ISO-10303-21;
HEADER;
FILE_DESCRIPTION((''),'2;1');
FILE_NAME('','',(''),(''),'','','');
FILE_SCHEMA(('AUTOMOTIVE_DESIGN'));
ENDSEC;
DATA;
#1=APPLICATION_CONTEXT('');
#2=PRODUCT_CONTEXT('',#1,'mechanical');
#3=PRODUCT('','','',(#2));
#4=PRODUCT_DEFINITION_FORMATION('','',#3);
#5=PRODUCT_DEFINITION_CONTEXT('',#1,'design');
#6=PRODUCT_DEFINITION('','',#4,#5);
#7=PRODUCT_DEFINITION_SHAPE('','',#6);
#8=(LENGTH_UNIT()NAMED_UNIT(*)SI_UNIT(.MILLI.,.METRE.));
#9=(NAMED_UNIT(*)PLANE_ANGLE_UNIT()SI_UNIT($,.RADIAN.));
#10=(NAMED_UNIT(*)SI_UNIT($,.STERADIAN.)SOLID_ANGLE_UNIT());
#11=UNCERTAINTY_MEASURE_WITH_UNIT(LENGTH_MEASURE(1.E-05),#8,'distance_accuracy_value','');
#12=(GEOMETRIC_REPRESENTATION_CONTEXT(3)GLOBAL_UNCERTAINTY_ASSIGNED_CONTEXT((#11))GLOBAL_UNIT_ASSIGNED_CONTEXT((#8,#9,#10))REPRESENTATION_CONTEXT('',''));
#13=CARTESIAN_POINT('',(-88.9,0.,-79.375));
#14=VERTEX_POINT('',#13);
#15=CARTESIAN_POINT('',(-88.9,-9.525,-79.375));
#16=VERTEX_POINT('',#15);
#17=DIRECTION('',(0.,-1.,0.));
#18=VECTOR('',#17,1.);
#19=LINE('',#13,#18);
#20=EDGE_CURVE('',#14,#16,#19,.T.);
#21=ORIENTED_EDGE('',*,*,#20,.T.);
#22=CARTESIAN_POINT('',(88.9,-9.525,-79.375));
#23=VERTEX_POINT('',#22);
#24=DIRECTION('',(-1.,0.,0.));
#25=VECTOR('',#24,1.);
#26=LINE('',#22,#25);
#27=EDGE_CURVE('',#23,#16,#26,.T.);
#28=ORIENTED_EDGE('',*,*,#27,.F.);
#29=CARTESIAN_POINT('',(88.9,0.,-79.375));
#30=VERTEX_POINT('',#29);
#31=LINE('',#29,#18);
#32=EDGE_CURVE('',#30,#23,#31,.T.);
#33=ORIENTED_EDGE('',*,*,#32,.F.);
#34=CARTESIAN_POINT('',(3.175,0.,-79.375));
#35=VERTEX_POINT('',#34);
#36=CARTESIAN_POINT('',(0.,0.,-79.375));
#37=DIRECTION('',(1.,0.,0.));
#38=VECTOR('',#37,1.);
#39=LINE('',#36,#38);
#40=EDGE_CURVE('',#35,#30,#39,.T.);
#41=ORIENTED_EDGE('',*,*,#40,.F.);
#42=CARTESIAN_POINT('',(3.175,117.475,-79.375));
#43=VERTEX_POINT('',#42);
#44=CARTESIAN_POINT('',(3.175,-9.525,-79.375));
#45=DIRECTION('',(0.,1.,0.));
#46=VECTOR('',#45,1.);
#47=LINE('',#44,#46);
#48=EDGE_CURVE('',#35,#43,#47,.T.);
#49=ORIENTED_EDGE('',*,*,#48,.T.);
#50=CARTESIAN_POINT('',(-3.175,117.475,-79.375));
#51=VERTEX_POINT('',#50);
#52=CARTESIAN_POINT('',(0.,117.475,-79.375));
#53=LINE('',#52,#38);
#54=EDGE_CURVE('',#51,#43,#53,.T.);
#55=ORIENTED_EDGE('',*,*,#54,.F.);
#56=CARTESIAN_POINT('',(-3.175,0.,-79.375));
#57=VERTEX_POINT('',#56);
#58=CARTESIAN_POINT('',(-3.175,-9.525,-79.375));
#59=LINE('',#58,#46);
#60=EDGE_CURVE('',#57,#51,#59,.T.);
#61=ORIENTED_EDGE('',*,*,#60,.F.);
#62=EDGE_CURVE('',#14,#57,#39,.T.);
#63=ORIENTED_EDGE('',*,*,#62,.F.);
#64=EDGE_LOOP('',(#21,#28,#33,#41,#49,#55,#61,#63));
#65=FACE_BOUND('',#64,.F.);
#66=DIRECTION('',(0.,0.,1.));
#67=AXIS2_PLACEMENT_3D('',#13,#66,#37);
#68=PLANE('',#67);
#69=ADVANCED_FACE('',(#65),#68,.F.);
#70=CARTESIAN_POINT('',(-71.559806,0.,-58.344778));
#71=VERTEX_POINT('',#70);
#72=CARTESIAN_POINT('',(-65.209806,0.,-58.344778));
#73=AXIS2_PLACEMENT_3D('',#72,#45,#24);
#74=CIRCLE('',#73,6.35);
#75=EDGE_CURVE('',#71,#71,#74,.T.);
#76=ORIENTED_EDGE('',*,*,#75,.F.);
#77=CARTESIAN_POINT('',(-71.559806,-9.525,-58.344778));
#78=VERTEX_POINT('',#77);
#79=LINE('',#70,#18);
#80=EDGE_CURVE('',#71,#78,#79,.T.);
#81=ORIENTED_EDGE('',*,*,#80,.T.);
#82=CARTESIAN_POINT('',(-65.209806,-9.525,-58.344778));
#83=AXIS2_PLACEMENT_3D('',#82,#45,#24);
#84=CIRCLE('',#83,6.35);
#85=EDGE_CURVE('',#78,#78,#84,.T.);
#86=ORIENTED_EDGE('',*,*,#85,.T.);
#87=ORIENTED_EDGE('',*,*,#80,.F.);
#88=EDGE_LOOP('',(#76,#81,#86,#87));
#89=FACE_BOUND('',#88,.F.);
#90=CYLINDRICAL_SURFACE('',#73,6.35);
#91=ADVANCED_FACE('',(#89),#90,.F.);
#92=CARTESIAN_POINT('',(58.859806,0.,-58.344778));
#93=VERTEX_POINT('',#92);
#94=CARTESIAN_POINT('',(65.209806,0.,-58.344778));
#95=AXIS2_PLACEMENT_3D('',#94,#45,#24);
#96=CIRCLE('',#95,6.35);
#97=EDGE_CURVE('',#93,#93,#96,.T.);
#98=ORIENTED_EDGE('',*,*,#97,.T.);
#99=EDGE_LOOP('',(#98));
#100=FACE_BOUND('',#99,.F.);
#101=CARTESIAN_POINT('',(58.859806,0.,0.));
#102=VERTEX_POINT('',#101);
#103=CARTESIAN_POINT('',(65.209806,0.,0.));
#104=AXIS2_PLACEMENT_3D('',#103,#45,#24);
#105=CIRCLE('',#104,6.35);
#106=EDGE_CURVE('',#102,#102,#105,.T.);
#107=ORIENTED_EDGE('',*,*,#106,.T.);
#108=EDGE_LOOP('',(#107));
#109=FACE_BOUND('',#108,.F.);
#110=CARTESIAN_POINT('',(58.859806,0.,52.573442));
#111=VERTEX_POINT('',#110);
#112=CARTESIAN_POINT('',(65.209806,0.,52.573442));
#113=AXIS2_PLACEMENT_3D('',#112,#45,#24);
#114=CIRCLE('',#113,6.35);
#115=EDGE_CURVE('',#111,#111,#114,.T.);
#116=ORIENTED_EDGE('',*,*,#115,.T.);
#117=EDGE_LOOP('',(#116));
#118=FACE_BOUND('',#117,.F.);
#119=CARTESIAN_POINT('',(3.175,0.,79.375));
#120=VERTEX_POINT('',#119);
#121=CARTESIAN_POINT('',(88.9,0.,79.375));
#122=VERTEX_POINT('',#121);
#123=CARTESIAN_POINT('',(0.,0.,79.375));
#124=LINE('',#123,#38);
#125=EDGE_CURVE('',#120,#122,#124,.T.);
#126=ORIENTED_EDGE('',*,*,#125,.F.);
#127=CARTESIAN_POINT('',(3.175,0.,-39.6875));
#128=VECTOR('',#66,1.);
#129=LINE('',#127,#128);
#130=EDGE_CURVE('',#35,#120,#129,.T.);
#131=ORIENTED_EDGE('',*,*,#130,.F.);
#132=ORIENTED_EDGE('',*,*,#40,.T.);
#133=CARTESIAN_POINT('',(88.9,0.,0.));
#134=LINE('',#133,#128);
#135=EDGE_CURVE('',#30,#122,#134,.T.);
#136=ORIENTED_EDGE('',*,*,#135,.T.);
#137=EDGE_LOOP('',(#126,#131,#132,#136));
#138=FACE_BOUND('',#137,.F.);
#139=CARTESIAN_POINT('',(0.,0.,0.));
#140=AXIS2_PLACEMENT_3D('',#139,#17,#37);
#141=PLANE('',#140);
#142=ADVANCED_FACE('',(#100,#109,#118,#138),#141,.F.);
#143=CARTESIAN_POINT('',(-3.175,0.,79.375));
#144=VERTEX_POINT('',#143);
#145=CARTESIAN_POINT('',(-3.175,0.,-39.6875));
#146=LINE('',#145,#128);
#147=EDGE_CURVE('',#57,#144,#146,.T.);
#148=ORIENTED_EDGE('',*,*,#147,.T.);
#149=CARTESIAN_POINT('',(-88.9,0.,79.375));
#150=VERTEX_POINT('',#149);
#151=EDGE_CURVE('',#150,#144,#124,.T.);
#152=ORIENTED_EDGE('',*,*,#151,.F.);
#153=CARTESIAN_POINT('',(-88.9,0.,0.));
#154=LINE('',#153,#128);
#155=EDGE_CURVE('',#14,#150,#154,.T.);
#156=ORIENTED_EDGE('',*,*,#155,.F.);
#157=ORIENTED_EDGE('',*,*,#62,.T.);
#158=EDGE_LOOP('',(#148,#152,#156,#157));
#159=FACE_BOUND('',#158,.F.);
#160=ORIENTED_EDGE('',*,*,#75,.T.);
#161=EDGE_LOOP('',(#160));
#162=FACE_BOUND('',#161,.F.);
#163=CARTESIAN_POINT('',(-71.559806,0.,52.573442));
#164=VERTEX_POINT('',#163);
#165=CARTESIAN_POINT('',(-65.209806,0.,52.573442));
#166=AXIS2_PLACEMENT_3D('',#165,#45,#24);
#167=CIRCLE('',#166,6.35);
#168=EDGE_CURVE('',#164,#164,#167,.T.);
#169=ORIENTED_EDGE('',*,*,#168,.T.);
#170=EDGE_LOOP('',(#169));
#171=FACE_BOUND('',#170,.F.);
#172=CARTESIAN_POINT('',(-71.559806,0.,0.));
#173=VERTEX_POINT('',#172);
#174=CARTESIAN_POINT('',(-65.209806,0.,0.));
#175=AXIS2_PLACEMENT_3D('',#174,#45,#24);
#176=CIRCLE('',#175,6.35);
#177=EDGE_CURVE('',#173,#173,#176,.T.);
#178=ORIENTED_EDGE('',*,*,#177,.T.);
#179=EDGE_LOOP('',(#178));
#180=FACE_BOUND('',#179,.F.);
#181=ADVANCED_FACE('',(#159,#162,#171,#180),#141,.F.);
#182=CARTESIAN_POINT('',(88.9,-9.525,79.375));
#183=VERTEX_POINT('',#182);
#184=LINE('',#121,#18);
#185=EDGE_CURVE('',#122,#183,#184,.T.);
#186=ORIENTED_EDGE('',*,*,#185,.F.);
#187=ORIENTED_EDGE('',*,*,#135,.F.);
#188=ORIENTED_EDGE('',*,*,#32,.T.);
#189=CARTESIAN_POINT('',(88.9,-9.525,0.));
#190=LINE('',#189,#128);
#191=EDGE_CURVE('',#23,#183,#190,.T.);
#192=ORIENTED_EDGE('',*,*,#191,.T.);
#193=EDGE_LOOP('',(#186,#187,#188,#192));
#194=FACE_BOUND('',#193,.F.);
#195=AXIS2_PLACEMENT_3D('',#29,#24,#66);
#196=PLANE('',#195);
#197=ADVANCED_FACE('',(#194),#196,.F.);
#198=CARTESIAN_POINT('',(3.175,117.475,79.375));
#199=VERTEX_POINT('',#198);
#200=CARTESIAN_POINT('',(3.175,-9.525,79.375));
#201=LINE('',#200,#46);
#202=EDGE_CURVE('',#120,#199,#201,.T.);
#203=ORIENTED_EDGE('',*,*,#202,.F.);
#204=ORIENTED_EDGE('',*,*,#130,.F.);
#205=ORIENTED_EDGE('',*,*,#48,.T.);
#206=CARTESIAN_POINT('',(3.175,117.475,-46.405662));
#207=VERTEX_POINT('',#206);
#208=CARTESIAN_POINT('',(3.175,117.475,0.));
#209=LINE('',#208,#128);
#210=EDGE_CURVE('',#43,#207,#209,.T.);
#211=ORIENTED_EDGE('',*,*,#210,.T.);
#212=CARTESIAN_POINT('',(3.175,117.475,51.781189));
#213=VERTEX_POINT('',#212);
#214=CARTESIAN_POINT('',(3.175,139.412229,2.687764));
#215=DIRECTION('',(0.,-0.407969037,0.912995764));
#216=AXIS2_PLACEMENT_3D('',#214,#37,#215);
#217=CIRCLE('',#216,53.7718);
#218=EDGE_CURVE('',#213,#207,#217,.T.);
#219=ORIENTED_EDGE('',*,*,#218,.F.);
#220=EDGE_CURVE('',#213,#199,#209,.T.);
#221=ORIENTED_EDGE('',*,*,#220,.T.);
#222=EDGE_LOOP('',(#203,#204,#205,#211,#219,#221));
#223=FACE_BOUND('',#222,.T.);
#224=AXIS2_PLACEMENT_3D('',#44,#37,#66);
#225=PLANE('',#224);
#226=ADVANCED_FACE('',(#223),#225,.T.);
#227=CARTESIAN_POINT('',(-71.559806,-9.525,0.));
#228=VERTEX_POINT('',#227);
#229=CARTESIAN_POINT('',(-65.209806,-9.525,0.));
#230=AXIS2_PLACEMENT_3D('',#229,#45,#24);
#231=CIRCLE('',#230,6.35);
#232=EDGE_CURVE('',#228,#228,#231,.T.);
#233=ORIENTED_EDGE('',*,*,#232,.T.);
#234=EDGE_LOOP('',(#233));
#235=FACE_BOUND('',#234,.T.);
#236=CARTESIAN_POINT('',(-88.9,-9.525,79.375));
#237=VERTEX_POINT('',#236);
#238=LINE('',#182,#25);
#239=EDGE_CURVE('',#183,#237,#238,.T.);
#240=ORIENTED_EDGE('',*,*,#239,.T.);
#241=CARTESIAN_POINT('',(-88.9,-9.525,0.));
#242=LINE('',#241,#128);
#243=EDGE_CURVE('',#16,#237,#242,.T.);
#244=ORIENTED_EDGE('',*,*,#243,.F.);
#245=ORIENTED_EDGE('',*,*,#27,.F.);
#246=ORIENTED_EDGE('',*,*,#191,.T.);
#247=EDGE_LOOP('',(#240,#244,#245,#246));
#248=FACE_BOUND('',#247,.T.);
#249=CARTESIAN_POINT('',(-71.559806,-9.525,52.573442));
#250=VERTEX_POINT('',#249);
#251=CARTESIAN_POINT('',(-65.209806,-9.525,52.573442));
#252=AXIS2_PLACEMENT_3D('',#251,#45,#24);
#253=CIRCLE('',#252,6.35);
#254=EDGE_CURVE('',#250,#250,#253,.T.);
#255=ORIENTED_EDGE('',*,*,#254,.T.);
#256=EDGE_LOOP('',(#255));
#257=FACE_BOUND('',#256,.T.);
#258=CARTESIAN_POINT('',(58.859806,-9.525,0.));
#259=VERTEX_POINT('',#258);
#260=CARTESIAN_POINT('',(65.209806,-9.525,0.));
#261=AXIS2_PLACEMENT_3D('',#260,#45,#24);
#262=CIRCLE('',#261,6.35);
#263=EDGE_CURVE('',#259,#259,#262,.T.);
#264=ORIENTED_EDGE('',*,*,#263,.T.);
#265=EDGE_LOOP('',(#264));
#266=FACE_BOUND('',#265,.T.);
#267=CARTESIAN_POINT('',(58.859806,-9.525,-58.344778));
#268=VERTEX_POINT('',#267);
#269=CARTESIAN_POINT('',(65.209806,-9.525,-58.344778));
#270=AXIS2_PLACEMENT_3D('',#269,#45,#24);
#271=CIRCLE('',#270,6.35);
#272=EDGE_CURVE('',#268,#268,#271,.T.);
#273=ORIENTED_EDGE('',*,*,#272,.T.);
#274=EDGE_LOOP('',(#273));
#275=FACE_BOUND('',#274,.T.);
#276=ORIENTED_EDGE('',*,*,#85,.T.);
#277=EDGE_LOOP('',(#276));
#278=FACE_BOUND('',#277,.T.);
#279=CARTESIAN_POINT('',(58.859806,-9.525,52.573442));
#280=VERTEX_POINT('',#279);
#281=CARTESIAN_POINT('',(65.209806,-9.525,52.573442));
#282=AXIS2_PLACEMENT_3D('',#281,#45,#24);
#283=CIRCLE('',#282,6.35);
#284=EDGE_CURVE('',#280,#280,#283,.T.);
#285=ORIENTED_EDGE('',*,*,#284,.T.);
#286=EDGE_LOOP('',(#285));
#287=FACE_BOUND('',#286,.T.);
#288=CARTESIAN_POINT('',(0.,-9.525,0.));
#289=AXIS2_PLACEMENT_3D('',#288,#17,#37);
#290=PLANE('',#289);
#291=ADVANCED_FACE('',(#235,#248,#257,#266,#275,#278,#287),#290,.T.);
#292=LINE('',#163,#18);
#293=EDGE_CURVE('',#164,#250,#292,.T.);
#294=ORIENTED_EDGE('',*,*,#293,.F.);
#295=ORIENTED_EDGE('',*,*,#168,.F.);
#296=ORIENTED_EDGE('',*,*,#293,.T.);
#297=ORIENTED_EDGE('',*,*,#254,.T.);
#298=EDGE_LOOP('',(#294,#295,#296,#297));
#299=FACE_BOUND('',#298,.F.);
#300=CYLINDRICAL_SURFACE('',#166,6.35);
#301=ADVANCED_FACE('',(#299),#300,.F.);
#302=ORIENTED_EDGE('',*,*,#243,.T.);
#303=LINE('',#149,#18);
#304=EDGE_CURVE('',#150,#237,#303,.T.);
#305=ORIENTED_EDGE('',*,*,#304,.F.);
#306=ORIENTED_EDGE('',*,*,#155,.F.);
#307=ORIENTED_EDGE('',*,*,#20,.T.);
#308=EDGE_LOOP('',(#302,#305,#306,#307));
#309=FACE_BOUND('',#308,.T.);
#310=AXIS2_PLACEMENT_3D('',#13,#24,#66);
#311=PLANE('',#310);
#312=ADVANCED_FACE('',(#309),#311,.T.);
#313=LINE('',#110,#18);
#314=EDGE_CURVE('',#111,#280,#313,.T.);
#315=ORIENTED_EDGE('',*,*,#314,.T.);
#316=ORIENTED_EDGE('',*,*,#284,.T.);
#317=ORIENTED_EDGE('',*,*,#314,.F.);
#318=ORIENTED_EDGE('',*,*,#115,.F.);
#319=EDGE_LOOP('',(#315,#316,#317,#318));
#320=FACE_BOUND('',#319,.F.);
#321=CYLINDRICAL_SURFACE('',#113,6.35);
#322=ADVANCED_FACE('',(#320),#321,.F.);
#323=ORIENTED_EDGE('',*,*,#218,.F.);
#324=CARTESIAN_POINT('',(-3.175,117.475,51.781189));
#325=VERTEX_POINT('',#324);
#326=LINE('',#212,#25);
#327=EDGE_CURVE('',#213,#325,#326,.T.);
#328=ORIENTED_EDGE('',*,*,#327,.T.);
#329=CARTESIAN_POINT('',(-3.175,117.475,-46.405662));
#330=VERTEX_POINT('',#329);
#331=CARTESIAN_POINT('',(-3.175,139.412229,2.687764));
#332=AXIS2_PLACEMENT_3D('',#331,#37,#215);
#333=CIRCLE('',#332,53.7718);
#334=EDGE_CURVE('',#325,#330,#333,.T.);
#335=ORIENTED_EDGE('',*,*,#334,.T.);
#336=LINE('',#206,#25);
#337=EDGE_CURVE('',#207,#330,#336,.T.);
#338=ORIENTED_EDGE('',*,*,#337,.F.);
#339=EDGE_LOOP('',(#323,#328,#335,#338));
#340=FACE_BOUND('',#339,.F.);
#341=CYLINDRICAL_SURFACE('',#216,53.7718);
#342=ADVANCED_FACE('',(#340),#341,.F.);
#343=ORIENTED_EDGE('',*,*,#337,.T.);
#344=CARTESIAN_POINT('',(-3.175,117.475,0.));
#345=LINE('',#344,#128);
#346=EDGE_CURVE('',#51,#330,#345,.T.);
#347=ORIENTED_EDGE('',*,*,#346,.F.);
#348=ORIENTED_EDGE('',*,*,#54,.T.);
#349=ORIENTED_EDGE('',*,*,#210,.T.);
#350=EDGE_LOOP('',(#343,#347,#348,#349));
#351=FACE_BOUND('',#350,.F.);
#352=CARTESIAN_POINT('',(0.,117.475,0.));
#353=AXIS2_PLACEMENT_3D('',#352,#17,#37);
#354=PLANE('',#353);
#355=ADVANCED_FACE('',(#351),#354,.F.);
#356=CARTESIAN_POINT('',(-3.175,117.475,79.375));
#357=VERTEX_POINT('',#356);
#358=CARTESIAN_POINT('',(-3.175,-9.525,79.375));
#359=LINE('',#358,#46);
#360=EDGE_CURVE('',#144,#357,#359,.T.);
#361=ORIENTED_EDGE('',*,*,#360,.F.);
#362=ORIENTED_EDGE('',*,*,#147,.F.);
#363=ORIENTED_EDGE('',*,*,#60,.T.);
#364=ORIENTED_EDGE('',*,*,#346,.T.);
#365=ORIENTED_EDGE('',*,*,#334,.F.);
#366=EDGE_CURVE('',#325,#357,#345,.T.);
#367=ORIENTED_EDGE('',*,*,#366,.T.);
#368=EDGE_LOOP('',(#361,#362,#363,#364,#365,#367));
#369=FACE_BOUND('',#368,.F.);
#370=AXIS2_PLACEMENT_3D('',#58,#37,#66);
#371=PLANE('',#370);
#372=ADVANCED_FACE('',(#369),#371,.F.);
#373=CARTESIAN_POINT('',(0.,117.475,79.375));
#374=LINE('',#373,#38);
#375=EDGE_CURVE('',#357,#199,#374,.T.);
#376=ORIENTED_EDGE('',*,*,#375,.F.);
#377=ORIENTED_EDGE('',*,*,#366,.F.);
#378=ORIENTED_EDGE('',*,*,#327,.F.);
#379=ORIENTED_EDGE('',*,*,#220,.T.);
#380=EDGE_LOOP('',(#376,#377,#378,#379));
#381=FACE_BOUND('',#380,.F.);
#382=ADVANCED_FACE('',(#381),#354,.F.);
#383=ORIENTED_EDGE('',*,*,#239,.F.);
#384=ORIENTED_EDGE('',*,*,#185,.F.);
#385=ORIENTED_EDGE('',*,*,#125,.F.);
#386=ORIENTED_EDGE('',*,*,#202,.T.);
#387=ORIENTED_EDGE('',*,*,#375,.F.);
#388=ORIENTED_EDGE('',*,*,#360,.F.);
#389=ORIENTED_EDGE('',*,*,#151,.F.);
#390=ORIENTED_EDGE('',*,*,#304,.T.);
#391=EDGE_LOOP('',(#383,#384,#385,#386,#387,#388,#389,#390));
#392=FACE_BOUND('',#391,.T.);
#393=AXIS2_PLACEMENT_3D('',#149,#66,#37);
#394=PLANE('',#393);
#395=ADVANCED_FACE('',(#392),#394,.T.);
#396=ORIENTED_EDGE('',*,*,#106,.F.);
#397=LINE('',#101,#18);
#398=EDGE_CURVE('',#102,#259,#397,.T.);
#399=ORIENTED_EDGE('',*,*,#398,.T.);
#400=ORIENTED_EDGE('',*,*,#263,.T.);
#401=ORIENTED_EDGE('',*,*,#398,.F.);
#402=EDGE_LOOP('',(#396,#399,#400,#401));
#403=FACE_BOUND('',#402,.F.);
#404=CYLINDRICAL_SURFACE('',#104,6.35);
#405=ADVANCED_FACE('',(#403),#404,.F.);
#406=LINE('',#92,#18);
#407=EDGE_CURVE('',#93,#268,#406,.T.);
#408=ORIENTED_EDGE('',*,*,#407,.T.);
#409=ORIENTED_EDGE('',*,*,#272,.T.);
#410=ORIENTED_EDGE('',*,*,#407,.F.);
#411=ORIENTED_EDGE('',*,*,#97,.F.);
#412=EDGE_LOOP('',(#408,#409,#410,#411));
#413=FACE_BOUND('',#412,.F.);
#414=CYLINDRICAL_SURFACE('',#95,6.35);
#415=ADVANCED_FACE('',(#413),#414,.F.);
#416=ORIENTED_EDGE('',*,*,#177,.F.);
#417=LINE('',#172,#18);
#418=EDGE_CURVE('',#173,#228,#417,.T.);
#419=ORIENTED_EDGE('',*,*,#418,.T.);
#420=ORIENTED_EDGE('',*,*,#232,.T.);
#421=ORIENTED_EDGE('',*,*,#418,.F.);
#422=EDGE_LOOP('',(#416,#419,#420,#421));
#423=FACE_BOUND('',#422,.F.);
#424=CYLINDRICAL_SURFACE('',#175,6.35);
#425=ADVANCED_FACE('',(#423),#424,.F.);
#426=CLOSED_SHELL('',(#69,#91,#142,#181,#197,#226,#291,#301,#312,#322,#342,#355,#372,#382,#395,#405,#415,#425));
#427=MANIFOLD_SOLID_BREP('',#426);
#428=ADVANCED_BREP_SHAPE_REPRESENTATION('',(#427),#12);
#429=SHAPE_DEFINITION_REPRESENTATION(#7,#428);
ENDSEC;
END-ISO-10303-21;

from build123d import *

# Parameters (mm, degrees)
F0_W     = 177.8
F0_H     = 158.75
F1_DEPTH = 9.525
F2_W     = 6.35
F2_H     = 158.75
F3_DEPTH = 127
F5_DEPTH = 25.4
F6_R     = 6.35
F7_DEPTH = 25.4


# Not quite as in the source:
# - a length typed as a fraction of an inch, garbled in the dataset ("3 / 203.2 mm" for 3/8 in), is restored


with BuildPart() as f1:
    # F0 (on Front) → F1 (new body)
    with BuildSketch(Plane.XZ):
        Rectangle(F0_W, F0_H)
    extrude(amount=F1_DEPTH)

    # F2 (on face) → F3 (join)
    with BuildSketch(Plane.XZ.offset(9.525)):
        Rectangle(F2_W, F2_H)
    extrude(amount=-F3_DEPTH)

    # F4 (on face) → F5 (cut)
    with BuildSketch(Plane.YZ.offset(3.175)):
        with BuildLine():
            Line((117.475, -46.4056618512), (117.475, 51.7811893811))
            ThreePointArc((117.475, 51.7811893811), (85.640429463, 2.687763765), (117.475, -46.4056618512))
        make_face()
    extrude(amount=-F5_DEPTH, mode=Mode.SUBTRACT)

    # F6 (on face) → F7 (cut)
    with BuildSketch(Plane(origin=(0, 0, 0), x_dir=(-1, 0, 0), z_dir=(0, 1, 0))):
        with Locations((-65.2098059654, 52.5734424591)):
            Circle(F6_R)
        with Locations((-65.2098059654, 0)):
            Circle(F6_R)
        with Locations((-65.2098059654, -58.3447776735)):
            Circle(F6_R)
        with Locations((65.2098059654, -58.3447776735)):
            Circle(F6_R)
        with Locations((65.2098059654, 0)):
            Circle(F6_R)
        with Locations((65.2098059654, 52.5734424591)):
            Circle(F6_R)
    extrude(amount=-F7_DEPTH, mode=Mode.SUBTRACT)


solid = f1.part
